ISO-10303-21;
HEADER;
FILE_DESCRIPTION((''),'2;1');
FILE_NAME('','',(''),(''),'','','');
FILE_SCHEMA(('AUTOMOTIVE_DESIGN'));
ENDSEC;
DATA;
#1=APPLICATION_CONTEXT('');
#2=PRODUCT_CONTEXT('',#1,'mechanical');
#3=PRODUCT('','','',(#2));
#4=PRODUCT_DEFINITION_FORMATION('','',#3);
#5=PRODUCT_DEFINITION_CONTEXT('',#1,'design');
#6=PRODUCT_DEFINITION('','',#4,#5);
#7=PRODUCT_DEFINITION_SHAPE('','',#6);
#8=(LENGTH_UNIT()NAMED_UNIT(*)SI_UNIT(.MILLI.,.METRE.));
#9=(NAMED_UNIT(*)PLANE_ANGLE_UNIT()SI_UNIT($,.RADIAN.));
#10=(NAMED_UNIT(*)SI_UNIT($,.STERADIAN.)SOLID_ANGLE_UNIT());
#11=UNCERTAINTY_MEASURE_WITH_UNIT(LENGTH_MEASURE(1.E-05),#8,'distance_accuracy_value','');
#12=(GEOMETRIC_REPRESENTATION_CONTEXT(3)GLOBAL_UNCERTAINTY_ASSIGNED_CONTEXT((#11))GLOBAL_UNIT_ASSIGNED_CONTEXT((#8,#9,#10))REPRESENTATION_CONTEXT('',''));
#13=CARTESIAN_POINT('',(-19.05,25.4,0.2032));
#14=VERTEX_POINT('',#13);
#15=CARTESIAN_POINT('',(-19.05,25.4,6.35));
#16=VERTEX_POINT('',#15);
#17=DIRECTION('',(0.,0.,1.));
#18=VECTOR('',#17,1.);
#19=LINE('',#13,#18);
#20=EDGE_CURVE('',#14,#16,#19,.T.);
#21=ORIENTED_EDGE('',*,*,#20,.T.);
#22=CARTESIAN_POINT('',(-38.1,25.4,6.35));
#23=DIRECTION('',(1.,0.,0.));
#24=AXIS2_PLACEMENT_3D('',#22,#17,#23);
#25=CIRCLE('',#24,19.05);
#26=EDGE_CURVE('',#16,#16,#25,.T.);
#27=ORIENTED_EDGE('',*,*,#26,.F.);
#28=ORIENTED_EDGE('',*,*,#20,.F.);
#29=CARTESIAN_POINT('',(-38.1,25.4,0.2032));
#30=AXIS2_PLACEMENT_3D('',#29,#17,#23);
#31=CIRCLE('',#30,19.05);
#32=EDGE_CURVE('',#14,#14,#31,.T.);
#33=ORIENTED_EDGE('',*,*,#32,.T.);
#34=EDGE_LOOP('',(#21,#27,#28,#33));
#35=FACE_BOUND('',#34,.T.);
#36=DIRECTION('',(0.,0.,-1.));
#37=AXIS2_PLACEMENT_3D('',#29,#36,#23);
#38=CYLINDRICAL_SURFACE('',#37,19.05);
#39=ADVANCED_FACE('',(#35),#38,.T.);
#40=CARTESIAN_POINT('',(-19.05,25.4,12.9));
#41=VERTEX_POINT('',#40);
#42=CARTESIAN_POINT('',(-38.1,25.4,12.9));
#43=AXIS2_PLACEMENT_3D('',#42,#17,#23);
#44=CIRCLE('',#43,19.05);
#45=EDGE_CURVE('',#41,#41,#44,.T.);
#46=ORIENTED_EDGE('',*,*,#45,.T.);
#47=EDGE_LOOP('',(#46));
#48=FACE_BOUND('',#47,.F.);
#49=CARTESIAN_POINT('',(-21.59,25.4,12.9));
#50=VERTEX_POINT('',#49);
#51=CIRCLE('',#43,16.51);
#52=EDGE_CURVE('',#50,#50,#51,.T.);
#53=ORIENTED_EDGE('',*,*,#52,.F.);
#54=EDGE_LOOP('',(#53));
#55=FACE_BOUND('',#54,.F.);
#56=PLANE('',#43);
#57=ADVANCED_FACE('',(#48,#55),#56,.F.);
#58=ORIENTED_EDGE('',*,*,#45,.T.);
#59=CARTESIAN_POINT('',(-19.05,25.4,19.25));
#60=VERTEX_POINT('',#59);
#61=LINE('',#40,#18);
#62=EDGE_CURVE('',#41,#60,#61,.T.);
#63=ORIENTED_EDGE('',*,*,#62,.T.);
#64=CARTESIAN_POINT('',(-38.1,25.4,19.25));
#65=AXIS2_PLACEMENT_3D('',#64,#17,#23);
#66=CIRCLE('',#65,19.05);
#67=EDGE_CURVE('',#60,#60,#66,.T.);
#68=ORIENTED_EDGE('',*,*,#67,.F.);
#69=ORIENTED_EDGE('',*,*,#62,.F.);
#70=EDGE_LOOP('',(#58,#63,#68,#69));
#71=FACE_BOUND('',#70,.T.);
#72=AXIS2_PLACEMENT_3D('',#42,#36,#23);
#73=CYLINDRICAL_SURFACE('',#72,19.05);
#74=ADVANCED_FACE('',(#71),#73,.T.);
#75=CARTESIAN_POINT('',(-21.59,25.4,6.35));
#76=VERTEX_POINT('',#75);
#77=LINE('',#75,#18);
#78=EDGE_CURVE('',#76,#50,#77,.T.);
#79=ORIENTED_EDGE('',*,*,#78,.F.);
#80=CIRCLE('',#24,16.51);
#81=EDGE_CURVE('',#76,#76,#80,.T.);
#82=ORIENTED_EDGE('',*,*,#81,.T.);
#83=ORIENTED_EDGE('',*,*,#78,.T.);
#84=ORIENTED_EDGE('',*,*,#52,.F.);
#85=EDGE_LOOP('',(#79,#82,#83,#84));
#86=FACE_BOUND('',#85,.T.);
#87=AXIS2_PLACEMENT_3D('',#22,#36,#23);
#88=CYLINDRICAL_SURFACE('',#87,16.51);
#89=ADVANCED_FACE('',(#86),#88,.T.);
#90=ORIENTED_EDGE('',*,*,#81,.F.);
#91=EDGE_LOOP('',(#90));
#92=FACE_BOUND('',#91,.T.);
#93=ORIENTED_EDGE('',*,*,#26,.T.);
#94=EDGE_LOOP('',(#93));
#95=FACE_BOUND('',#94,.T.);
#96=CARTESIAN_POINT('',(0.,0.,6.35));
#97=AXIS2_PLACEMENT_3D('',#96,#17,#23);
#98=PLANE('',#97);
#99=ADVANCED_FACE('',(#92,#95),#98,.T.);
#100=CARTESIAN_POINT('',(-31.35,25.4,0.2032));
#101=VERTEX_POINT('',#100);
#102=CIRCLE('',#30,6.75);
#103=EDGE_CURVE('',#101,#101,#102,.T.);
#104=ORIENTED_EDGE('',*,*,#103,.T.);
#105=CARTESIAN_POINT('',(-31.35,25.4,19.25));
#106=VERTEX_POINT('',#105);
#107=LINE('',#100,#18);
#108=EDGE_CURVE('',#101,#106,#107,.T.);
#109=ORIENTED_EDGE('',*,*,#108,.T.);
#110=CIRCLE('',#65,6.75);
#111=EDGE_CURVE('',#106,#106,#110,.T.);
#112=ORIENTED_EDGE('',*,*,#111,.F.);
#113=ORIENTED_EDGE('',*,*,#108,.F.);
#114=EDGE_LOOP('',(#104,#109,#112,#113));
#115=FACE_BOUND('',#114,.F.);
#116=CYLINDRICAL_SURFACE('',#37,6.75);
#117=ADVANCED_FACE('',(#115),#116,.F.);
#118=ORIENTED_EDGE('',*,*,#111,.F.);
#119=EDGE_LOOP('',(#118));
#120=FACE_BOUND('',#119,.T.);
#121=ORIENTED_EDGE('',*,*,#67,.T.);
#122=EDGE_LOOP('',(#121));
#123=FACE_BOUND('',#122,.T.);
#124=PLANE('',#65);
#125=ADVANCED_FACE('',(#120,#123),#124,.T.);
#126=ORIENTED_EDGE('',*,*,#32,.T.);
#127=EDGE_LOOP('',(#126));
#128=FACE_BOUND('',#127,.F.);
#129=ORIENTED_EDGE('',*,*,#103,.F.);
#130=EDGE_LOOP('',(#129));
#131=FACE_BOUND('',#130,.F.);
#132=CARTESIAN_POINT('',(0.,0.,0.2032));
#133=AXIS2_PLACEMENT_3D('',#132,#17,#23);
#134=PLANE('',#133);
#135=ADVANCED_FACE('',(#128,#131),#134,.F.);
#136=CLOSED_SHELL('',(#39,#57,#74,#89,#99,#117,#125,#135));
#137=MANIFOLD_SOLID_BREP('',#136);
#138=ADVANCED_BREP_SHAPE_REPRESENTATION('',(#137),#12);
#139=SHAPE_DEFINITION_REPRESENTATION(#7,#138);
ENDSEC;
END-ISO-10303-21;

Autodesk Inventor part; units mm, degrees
ref_plane "Work Plane1" through (0, 0, 0.2032) normal (0, 0, 1) x (1, 0, 0)
sketch "Sketch1" plane through (0, 0, 0.2032) normal (0, 0, 1) x (1, 0, 0)
  circle A0 centre (-38.1, 25.4) radius 6.35 construction
  circle A1 centre (-38.1, -25.4) radius 6.35 projected
  circle A2 centre (-38.1, 25.4) radius 6.35 construction
  circle A3 centre (-38.1, 25.4) radius 6.75
  circle A4 centre (-38.1, 25.4) radius 19.05 construction
  circle A5 centre (-38.1, 25.4) radius 19.05
  point P0 (0, 0)
  dimension "d0" = 0.4
ref_plane "Work Plane2" through (-44.45, 19.05, 25.4) normal (0, 0, 1) x (1, 0, 0)
ref_plane "Work Plane3" through (-48.5775, -83.82, 6.35) normal (0, 0, 1) x (1, 0, 0)
extrude "Extrusion1" add sketch "Sketch1" along normal up to surface (6.1468 mm away) contours A5
sketch "Sketch2" plane through (-38.1, 25.4, 6.35) normal (0, 0, 1) x (1, 0, 0)
  circle A0 centre (0, 0) radius 6.75 projected
  circle A1 centre (0, 0) radius 19.05 projected
  circle A2 centre (0, 0) radius 16.51
  point P0 (38.1, -25.4)
  dimension "d3" = 2.54
ref_plane "Work Plane4" through (-45.085, 18.415, 12.9) normal (0, 0, 1) x (1, 0, 0)
extrude "Extrusion2" add sketch "Sketch2" along normal up to surface (6.55 mm away) contours A2
sketch "Sketch3" plane through (-38.1, 25.4, 12.9) normal (0, 0, 1) x (1, 0, 0)
  circle A0 centre (0, 0) radius 6.75 projected
  circle A1 centre (0, 0) radius 16.51 projected
  circle A2 centre (0, 0) radius 19.05 projected
  circle A3 centre (0, 0) radius 16.51 projected
  circle A4 centre (0, 0) radius 19.05 projected
  point P0 (38.1, -25.4)
ref_plane "Work Plane5" through (-44.45, 19.05, 19.25) normal (0, 0, 1) x (1, 0, 0)
ref_plane "Work Plane6" through (-44.45, 19.05, 19.25) normal (0, 0, 1) x (1, 0, 0)
extrude "Extrusion3" add sketch "Sketch3" along normal up to surface (6.35 mm away) contours A1 | A2
properties part number "Cart Wheel"
